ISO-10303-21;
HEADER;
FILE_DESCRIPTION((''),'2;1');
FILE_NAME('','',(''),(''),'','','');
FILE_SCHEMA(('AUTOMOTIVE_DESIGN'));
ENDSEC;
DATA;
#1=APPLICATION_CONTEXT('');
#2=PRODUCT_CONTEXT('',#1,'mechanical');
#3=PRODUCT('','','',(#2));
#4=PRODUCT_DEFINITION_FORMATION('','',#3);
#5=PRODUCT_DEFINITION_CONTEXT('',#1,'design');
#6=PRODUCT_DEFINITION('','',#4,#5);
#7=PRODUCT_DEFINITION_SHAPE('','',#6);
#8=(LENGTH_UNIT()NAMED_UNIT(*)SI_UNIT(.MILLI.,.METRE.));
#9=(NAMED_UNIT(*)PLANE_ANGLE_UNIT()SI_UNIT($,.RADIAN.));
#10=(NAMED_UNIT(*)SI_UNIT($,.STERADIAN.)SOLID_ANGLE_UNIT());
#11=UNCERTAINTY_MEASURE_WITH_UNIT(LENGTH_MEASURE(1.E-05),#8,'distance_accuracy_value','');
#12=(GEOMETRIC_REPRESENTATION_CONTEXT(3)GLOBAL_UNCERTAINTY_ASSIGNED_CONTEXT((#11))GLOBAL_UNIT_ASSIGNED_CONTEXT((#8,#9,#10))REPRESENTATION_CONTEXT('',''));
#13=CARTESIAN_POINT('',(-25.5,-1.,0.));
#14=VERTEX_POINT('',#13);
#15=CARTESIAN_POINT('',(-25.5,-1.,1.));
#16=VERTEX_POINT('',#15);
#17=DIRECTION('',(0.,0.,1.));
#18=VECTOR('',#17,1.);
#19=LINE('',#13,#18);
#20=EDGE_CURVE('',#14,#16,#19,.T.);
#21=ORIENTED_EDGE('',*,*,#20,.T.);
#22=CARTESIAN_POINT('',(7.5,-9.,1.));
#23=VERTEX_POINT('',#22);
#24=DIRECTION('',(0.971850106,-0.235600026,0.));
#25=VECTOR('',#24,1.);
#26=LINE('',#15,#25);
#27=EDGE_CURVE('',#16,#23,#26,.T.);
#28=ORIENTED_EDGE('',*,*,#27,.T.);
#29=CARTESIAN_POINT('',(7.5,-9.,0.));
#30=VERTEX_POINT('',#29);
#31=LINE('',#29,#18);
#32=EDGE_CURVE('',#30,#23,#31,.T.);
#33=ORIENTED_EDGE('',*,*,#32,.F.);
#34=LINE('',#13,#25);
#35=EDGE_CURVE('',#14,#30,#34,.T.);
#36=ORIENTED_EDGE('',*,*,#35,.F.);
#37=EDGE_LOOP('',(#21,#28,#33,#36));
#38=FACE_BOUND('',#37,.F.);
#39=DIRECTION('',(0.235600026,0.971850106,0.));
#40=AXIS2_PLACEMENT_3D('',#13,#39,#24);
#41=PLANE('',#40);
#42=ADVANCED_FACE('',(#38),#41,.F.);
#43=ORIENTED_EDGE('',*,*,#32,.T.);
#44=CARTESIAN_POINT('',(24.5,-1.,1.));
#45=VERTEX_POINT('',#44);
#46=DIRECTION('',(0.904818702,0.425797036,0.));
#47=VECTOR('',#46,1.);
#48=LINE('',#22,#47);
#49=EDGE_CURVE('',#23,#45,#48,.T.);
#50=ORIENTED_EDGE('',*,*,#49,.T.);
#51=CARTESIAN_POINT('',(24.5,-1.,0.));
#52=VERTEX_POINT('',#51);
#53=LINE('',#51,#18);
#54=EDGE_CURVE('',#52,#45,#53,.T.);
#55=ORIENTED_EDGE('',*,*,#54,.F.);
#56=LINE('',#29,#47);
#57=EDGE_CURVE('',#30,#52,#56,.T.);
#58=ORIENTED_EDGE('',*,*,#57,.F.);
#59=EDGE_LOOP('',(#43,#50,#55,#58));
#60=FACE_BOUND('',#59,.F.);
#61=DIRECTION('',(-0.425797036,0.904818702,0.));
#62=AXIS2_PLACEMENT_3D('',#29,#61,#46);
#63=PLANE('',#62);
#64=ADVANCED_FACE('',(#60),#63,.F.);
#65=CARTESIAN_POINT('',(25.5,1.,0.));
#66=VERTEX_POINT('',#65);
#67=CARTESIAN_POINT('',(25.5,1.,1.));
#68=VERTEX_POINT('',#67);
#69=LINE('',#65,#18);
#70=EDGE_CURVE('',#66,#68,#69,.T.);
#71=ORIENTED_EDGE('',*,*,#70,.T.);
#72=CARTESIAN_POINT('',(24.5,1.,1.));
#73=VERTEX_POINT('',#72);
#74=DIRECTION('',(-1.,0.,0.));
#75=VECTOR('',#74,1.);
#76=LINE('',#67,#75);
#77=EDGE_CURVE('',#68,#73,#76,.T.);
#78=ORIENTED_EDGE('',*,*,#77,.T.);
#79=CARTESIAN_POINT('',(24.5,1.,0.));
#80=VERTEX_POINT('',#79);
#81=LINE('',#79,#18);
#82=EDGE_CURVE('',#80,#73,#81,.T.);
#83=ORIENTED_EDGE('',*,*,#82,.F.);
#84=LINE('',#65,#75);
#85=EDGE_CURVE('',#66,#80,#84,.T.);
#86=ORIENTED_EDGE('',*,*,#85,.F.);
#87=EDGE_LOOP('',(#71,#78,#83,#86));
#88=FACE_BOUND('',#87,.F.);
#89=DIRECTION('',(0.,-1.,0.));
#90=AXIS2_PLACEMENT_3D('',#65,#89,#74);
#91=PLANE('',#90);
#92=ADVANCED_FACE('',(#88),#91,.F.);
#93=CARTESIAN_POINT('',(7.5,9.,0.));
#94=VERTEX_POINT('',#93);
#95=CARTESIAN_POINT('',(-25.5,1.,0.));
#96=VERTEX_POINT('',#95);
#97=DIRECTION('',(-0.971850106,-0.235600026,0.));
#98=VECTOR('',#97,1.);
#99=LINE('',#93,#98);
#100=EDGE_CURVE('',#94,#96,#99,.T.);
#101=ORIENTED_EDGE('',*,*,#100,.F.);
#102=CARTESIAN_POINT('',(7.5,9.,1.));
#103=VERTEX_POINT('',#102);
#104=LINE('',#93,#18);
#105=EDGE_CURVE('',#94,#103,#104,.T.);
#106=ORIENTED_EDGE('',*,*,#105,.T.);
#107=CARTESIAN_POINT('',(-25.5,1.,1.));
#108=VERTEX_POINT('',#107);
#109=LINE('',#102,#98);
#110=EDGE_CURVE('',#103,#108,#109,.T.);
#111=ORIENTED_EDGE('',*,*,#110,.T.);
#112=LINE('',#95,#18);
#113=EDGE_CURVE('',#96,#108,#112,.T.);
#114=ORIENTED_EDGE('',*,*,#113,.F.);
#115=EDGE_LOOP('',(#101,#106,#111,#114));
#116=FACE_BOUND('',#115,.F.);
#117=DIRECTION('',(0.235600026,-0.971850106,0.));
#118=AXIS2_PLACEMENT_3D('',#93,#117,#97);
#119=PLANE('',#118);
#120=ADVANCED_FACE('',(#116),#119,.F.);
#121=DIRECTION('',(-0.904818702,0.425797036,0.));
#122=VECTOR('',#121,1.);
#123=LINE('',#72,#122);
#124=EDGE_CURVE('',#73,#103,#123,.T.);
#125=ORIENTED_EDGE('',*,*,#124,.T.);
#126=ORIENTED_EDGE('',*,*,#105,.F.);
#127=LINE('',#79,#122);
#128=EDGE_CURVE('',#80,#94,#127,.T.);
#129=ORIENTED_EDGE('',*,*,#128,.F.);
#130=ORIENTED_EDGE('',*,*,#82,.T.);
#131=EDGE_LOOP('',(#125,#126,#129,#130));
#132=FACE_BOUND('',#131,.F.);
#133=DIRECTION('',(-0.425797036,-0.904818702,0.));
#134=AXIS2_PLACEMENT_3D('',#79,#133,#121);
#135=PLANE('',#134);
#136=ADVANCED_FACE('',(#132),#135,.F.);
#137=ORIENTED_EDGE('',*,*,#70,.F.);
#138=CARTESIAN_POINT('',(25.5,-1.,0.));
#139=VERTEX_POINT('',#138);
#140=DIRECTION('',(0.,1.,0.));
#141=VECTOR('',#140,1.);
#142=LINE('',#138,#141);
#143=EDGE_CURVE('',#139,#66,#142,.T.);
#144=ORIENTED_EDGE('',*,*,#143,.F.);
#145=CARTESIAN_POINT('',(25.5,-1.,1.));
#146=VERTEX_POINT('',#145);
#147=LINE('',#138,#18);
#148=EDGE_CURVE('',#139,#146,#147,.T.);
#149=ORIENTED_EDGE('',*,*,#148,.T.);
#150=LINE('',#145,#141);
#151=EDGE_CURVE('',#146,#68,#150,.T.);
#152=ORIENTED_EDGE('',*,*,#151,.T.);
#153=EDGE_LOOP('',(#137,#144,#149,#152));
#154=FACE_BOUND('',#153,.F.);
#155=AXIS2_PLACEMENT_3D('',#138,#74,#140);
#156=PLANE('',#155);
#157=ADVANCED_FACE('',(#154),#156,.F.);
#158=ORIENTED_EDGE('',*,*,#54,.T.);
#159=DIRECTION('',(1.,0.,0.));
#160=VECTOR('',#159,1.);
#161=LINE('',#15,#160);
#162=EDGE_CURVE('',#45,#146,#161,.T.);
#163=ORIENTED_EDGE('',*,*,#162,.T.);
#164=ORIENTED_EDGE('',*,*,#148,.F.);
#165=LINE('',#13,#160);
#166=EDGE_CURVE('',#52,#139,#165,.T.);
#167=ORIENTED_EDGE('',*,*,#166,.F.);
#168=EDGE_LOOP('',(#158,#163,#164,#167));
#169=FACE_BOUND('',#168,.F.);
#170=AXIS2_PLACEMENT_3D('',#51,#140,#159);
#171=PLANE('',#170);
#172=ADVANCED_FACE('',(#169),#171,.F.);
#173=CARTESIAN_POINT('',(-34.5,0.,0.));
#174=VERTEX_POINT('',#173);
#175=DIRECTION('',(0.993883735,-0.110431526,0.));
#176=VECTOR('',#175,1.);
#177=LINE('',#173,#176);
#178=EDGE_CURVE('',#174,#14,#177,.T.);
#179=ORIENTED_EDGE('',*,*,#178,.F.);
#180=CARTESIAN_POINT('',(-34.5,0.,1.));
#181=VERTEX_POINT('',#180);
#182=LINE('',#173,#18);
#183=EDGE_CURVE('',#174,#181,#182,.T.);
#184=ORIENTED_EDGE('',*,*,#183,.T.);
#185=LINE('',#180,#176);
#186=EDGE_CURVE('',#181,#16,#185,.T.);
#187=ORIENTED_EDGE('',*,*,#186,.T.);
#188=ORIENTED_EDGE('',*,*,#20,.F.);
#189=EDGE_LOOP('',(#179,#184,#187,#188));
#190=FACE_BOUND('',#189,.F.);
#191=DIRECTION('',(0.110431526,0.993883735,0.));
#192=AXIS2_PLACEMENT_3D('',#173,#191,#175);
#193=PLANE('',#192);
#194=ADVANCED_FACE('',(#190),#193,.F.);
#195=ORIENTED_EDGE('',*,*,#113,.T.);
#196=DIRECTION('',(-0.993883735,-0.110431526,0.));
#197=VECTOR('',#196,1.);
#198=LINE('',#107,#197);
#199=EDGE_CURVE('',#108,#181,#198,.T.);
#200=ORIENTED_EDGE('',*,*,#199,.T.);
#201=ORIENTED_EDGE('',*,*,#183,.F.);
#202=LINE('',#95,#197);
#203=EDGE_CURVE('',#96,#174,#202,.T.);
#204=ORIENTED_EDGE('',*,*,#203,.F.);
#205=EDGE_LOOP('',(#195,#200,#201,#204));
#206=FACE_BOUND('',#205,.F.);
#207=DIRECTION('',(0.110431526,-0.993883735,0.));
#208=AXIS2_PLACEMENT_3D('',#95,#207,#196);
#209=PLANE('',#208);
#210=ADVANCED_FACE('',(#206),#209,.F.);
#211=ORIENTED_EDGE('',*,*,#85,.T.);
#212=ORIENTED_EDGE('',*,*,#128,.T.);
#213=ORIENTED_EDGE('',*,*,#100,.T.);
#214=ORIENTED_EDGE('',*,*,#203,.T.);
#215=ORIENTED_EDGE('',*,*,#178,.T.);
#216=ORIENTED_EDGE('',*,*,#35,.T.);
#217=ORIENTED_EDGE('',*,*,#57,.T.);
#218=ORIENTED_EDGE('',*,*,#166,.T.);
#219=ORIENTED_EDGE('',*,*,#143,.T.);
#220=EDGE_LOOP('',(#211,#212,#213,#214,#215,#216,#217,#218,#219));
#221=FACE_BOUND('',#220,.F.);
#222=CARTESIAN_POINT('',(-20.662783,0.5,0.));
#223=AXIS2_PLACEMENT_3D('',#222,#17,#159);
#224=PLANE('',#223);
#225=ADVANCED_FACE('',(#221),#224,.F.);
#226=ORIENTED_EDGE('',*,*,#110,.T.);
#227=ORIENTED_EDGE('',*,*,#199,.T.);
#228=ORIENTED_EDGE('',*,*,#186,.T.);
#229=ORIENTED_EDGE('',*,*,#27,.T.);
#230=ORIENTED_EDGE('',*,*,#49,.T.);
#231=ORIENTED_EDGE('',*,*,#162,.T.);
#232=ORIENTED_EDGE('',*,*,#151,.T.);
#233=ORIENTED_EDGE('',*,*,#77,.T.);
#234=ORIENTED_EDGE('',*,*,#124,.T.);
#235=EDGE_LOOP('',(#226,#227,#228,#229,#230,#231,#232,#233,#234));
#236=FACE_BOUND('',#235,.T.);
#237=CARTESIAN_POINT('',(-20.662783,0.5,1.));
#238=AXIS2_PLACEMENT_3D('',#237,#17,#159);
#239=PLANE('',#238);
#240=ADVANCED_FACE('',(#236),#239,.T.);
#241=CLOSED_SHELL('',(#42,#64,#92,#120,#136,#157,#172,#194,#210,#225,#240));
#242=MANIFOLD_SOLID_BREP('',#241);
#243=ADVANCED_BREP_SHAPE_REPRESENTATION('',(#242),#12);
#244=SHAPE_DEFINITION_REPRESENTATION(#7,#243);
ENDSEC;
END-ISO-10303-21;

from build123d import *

# Parameters (mm, degrees)
F0_W     = 9.6744340956
F0_H     = 1
F1_DEPTH = 1


# Not quite as in the source:
# - a feature names something its author has since deleted; it is built from what else it names


with BuildPart() as f1:
    # F0 (on Top) → F1 (new body)
    with BuildSketch(Plane.XY):
        with Locations((-20.6627829522, 0.5)):
            Rectangle(F0_W, F0_H)
        Polygon((-34.5, 0), (-25.5, 0), (-25.5, 1), align=None)
        Polygon((-15.8255659044, 0), (-25.5, 0), (-25.5, -1), (24.5, -1), (25.5, -1), (25.5, 0), align=None)
        Polygon((-25.5, -1), (-25.5, 0), (-34.5, 0), align=None)
        Polygon((-15.8255659044, 1), (-15.8255659044, 0), (25.5, 0), (25.5, 1), (24.5, 1), align=None)
        with BuildLine():
            add(Edge.make_bspline(
                [(-25.5, 1), (-14.5003329962, 3.3801647369), (-13.2050132379, 2.5), (7.5, 3)],
                knots=[0, 0, 0, 0, 33.0605505096, 33.0605505096, 33.0605505096, 33.0605505096], degree=3))
            Line((-25.5, 1), (-15.8255659044, 1))
            Line((-15.8255659044, 1), (24.5, 1))
            add(Edge.make_bspline(
                [(7.5, 3), (14.1289979219, 2.5626332499), (18.8218969852, 1.9759975839), (24.5, 1)],
                knots=[0, 0, 0, 0, 17.1172427686, 17.1172427686, 17.1172427686, 17.1172427686], degree=3))
        make_face()
        with BuildLine():
            Line((7.5, 9), (-25.5, 1))
            add(Edge.make_bspline(
                [(-25.5, 1), (-14.5003329962, 3.3801647369), (-13.2050132379, 2.5), (7.5, 3)],
                knots=[0, 0, 0, 0, 33.0605505096, 33.0605505096, 33.0605505096, 33.0605505096], degree=3))
            add(Edge.make_bspline(
                [(7.5, 3), (14.1289979219, 2.5626332499), (18.8218969852, 1.9759975839), (24.5, 1)],
                knots=[0, 0, 0, 0, 17.1172427686, 17.1172427686, 17.1172427686, 17.1172427686], degree=3))
            Line((24.5, 1), (7.5, 9))
        make_face()
        with BuildLine():
            add(Edge.make_bspline(
                [(-25.5, -1), (-14.5003329962, -3.3801647369), (-13.2050132379, -2.5), (7.5, -3)],
                knots=[0, 0, 0, 0, 33.0605505096, 33.0605505096, 33.0605505096, 33.0605505096], degree=3))
            Line((-25.5, -1), (7.5, -9))
            Line((7.5, -9), (24.5, -1))
            add(Edge.make_bspline(
                [(7.5, -3), (14.1289979219, -2.5626332499), (18.8218969852, -1.9759975839), (24.5, -1)],
                knots=[0, 0, 0, 0, 17.1172427686, 17.1172427686, 17.1172427686, 17.1172427686], degree=3))
        make_face()
        with BuildLine():
            Line((24.5, -1), (-25.5, -1))
            add(Edge.make_bspline(
                [(-25.5, -1), (-14.5003329962, -3.3801647369), (-13.2050132379, -2.5), (7.5, -3)],
                knots=[0, 0, 0, 0, 33.0605505096, 33.0605505096, 33.0605505096, 33.0605505096], degree=3))
            add(Edge.make_bspline(
                [(7.5, -3), (14.1289979219, -2.5626332499), (18.8218969852, -1.9759975839), (24.5, -1)],
                knots=[0, 0, 0, 0, 17.1172427686, 17.1172427686, 17.1172427686, 17.1172427686], degree=3))
        make_face()
    extrude(amount=F1_DEPTH)


solid = f1.part
